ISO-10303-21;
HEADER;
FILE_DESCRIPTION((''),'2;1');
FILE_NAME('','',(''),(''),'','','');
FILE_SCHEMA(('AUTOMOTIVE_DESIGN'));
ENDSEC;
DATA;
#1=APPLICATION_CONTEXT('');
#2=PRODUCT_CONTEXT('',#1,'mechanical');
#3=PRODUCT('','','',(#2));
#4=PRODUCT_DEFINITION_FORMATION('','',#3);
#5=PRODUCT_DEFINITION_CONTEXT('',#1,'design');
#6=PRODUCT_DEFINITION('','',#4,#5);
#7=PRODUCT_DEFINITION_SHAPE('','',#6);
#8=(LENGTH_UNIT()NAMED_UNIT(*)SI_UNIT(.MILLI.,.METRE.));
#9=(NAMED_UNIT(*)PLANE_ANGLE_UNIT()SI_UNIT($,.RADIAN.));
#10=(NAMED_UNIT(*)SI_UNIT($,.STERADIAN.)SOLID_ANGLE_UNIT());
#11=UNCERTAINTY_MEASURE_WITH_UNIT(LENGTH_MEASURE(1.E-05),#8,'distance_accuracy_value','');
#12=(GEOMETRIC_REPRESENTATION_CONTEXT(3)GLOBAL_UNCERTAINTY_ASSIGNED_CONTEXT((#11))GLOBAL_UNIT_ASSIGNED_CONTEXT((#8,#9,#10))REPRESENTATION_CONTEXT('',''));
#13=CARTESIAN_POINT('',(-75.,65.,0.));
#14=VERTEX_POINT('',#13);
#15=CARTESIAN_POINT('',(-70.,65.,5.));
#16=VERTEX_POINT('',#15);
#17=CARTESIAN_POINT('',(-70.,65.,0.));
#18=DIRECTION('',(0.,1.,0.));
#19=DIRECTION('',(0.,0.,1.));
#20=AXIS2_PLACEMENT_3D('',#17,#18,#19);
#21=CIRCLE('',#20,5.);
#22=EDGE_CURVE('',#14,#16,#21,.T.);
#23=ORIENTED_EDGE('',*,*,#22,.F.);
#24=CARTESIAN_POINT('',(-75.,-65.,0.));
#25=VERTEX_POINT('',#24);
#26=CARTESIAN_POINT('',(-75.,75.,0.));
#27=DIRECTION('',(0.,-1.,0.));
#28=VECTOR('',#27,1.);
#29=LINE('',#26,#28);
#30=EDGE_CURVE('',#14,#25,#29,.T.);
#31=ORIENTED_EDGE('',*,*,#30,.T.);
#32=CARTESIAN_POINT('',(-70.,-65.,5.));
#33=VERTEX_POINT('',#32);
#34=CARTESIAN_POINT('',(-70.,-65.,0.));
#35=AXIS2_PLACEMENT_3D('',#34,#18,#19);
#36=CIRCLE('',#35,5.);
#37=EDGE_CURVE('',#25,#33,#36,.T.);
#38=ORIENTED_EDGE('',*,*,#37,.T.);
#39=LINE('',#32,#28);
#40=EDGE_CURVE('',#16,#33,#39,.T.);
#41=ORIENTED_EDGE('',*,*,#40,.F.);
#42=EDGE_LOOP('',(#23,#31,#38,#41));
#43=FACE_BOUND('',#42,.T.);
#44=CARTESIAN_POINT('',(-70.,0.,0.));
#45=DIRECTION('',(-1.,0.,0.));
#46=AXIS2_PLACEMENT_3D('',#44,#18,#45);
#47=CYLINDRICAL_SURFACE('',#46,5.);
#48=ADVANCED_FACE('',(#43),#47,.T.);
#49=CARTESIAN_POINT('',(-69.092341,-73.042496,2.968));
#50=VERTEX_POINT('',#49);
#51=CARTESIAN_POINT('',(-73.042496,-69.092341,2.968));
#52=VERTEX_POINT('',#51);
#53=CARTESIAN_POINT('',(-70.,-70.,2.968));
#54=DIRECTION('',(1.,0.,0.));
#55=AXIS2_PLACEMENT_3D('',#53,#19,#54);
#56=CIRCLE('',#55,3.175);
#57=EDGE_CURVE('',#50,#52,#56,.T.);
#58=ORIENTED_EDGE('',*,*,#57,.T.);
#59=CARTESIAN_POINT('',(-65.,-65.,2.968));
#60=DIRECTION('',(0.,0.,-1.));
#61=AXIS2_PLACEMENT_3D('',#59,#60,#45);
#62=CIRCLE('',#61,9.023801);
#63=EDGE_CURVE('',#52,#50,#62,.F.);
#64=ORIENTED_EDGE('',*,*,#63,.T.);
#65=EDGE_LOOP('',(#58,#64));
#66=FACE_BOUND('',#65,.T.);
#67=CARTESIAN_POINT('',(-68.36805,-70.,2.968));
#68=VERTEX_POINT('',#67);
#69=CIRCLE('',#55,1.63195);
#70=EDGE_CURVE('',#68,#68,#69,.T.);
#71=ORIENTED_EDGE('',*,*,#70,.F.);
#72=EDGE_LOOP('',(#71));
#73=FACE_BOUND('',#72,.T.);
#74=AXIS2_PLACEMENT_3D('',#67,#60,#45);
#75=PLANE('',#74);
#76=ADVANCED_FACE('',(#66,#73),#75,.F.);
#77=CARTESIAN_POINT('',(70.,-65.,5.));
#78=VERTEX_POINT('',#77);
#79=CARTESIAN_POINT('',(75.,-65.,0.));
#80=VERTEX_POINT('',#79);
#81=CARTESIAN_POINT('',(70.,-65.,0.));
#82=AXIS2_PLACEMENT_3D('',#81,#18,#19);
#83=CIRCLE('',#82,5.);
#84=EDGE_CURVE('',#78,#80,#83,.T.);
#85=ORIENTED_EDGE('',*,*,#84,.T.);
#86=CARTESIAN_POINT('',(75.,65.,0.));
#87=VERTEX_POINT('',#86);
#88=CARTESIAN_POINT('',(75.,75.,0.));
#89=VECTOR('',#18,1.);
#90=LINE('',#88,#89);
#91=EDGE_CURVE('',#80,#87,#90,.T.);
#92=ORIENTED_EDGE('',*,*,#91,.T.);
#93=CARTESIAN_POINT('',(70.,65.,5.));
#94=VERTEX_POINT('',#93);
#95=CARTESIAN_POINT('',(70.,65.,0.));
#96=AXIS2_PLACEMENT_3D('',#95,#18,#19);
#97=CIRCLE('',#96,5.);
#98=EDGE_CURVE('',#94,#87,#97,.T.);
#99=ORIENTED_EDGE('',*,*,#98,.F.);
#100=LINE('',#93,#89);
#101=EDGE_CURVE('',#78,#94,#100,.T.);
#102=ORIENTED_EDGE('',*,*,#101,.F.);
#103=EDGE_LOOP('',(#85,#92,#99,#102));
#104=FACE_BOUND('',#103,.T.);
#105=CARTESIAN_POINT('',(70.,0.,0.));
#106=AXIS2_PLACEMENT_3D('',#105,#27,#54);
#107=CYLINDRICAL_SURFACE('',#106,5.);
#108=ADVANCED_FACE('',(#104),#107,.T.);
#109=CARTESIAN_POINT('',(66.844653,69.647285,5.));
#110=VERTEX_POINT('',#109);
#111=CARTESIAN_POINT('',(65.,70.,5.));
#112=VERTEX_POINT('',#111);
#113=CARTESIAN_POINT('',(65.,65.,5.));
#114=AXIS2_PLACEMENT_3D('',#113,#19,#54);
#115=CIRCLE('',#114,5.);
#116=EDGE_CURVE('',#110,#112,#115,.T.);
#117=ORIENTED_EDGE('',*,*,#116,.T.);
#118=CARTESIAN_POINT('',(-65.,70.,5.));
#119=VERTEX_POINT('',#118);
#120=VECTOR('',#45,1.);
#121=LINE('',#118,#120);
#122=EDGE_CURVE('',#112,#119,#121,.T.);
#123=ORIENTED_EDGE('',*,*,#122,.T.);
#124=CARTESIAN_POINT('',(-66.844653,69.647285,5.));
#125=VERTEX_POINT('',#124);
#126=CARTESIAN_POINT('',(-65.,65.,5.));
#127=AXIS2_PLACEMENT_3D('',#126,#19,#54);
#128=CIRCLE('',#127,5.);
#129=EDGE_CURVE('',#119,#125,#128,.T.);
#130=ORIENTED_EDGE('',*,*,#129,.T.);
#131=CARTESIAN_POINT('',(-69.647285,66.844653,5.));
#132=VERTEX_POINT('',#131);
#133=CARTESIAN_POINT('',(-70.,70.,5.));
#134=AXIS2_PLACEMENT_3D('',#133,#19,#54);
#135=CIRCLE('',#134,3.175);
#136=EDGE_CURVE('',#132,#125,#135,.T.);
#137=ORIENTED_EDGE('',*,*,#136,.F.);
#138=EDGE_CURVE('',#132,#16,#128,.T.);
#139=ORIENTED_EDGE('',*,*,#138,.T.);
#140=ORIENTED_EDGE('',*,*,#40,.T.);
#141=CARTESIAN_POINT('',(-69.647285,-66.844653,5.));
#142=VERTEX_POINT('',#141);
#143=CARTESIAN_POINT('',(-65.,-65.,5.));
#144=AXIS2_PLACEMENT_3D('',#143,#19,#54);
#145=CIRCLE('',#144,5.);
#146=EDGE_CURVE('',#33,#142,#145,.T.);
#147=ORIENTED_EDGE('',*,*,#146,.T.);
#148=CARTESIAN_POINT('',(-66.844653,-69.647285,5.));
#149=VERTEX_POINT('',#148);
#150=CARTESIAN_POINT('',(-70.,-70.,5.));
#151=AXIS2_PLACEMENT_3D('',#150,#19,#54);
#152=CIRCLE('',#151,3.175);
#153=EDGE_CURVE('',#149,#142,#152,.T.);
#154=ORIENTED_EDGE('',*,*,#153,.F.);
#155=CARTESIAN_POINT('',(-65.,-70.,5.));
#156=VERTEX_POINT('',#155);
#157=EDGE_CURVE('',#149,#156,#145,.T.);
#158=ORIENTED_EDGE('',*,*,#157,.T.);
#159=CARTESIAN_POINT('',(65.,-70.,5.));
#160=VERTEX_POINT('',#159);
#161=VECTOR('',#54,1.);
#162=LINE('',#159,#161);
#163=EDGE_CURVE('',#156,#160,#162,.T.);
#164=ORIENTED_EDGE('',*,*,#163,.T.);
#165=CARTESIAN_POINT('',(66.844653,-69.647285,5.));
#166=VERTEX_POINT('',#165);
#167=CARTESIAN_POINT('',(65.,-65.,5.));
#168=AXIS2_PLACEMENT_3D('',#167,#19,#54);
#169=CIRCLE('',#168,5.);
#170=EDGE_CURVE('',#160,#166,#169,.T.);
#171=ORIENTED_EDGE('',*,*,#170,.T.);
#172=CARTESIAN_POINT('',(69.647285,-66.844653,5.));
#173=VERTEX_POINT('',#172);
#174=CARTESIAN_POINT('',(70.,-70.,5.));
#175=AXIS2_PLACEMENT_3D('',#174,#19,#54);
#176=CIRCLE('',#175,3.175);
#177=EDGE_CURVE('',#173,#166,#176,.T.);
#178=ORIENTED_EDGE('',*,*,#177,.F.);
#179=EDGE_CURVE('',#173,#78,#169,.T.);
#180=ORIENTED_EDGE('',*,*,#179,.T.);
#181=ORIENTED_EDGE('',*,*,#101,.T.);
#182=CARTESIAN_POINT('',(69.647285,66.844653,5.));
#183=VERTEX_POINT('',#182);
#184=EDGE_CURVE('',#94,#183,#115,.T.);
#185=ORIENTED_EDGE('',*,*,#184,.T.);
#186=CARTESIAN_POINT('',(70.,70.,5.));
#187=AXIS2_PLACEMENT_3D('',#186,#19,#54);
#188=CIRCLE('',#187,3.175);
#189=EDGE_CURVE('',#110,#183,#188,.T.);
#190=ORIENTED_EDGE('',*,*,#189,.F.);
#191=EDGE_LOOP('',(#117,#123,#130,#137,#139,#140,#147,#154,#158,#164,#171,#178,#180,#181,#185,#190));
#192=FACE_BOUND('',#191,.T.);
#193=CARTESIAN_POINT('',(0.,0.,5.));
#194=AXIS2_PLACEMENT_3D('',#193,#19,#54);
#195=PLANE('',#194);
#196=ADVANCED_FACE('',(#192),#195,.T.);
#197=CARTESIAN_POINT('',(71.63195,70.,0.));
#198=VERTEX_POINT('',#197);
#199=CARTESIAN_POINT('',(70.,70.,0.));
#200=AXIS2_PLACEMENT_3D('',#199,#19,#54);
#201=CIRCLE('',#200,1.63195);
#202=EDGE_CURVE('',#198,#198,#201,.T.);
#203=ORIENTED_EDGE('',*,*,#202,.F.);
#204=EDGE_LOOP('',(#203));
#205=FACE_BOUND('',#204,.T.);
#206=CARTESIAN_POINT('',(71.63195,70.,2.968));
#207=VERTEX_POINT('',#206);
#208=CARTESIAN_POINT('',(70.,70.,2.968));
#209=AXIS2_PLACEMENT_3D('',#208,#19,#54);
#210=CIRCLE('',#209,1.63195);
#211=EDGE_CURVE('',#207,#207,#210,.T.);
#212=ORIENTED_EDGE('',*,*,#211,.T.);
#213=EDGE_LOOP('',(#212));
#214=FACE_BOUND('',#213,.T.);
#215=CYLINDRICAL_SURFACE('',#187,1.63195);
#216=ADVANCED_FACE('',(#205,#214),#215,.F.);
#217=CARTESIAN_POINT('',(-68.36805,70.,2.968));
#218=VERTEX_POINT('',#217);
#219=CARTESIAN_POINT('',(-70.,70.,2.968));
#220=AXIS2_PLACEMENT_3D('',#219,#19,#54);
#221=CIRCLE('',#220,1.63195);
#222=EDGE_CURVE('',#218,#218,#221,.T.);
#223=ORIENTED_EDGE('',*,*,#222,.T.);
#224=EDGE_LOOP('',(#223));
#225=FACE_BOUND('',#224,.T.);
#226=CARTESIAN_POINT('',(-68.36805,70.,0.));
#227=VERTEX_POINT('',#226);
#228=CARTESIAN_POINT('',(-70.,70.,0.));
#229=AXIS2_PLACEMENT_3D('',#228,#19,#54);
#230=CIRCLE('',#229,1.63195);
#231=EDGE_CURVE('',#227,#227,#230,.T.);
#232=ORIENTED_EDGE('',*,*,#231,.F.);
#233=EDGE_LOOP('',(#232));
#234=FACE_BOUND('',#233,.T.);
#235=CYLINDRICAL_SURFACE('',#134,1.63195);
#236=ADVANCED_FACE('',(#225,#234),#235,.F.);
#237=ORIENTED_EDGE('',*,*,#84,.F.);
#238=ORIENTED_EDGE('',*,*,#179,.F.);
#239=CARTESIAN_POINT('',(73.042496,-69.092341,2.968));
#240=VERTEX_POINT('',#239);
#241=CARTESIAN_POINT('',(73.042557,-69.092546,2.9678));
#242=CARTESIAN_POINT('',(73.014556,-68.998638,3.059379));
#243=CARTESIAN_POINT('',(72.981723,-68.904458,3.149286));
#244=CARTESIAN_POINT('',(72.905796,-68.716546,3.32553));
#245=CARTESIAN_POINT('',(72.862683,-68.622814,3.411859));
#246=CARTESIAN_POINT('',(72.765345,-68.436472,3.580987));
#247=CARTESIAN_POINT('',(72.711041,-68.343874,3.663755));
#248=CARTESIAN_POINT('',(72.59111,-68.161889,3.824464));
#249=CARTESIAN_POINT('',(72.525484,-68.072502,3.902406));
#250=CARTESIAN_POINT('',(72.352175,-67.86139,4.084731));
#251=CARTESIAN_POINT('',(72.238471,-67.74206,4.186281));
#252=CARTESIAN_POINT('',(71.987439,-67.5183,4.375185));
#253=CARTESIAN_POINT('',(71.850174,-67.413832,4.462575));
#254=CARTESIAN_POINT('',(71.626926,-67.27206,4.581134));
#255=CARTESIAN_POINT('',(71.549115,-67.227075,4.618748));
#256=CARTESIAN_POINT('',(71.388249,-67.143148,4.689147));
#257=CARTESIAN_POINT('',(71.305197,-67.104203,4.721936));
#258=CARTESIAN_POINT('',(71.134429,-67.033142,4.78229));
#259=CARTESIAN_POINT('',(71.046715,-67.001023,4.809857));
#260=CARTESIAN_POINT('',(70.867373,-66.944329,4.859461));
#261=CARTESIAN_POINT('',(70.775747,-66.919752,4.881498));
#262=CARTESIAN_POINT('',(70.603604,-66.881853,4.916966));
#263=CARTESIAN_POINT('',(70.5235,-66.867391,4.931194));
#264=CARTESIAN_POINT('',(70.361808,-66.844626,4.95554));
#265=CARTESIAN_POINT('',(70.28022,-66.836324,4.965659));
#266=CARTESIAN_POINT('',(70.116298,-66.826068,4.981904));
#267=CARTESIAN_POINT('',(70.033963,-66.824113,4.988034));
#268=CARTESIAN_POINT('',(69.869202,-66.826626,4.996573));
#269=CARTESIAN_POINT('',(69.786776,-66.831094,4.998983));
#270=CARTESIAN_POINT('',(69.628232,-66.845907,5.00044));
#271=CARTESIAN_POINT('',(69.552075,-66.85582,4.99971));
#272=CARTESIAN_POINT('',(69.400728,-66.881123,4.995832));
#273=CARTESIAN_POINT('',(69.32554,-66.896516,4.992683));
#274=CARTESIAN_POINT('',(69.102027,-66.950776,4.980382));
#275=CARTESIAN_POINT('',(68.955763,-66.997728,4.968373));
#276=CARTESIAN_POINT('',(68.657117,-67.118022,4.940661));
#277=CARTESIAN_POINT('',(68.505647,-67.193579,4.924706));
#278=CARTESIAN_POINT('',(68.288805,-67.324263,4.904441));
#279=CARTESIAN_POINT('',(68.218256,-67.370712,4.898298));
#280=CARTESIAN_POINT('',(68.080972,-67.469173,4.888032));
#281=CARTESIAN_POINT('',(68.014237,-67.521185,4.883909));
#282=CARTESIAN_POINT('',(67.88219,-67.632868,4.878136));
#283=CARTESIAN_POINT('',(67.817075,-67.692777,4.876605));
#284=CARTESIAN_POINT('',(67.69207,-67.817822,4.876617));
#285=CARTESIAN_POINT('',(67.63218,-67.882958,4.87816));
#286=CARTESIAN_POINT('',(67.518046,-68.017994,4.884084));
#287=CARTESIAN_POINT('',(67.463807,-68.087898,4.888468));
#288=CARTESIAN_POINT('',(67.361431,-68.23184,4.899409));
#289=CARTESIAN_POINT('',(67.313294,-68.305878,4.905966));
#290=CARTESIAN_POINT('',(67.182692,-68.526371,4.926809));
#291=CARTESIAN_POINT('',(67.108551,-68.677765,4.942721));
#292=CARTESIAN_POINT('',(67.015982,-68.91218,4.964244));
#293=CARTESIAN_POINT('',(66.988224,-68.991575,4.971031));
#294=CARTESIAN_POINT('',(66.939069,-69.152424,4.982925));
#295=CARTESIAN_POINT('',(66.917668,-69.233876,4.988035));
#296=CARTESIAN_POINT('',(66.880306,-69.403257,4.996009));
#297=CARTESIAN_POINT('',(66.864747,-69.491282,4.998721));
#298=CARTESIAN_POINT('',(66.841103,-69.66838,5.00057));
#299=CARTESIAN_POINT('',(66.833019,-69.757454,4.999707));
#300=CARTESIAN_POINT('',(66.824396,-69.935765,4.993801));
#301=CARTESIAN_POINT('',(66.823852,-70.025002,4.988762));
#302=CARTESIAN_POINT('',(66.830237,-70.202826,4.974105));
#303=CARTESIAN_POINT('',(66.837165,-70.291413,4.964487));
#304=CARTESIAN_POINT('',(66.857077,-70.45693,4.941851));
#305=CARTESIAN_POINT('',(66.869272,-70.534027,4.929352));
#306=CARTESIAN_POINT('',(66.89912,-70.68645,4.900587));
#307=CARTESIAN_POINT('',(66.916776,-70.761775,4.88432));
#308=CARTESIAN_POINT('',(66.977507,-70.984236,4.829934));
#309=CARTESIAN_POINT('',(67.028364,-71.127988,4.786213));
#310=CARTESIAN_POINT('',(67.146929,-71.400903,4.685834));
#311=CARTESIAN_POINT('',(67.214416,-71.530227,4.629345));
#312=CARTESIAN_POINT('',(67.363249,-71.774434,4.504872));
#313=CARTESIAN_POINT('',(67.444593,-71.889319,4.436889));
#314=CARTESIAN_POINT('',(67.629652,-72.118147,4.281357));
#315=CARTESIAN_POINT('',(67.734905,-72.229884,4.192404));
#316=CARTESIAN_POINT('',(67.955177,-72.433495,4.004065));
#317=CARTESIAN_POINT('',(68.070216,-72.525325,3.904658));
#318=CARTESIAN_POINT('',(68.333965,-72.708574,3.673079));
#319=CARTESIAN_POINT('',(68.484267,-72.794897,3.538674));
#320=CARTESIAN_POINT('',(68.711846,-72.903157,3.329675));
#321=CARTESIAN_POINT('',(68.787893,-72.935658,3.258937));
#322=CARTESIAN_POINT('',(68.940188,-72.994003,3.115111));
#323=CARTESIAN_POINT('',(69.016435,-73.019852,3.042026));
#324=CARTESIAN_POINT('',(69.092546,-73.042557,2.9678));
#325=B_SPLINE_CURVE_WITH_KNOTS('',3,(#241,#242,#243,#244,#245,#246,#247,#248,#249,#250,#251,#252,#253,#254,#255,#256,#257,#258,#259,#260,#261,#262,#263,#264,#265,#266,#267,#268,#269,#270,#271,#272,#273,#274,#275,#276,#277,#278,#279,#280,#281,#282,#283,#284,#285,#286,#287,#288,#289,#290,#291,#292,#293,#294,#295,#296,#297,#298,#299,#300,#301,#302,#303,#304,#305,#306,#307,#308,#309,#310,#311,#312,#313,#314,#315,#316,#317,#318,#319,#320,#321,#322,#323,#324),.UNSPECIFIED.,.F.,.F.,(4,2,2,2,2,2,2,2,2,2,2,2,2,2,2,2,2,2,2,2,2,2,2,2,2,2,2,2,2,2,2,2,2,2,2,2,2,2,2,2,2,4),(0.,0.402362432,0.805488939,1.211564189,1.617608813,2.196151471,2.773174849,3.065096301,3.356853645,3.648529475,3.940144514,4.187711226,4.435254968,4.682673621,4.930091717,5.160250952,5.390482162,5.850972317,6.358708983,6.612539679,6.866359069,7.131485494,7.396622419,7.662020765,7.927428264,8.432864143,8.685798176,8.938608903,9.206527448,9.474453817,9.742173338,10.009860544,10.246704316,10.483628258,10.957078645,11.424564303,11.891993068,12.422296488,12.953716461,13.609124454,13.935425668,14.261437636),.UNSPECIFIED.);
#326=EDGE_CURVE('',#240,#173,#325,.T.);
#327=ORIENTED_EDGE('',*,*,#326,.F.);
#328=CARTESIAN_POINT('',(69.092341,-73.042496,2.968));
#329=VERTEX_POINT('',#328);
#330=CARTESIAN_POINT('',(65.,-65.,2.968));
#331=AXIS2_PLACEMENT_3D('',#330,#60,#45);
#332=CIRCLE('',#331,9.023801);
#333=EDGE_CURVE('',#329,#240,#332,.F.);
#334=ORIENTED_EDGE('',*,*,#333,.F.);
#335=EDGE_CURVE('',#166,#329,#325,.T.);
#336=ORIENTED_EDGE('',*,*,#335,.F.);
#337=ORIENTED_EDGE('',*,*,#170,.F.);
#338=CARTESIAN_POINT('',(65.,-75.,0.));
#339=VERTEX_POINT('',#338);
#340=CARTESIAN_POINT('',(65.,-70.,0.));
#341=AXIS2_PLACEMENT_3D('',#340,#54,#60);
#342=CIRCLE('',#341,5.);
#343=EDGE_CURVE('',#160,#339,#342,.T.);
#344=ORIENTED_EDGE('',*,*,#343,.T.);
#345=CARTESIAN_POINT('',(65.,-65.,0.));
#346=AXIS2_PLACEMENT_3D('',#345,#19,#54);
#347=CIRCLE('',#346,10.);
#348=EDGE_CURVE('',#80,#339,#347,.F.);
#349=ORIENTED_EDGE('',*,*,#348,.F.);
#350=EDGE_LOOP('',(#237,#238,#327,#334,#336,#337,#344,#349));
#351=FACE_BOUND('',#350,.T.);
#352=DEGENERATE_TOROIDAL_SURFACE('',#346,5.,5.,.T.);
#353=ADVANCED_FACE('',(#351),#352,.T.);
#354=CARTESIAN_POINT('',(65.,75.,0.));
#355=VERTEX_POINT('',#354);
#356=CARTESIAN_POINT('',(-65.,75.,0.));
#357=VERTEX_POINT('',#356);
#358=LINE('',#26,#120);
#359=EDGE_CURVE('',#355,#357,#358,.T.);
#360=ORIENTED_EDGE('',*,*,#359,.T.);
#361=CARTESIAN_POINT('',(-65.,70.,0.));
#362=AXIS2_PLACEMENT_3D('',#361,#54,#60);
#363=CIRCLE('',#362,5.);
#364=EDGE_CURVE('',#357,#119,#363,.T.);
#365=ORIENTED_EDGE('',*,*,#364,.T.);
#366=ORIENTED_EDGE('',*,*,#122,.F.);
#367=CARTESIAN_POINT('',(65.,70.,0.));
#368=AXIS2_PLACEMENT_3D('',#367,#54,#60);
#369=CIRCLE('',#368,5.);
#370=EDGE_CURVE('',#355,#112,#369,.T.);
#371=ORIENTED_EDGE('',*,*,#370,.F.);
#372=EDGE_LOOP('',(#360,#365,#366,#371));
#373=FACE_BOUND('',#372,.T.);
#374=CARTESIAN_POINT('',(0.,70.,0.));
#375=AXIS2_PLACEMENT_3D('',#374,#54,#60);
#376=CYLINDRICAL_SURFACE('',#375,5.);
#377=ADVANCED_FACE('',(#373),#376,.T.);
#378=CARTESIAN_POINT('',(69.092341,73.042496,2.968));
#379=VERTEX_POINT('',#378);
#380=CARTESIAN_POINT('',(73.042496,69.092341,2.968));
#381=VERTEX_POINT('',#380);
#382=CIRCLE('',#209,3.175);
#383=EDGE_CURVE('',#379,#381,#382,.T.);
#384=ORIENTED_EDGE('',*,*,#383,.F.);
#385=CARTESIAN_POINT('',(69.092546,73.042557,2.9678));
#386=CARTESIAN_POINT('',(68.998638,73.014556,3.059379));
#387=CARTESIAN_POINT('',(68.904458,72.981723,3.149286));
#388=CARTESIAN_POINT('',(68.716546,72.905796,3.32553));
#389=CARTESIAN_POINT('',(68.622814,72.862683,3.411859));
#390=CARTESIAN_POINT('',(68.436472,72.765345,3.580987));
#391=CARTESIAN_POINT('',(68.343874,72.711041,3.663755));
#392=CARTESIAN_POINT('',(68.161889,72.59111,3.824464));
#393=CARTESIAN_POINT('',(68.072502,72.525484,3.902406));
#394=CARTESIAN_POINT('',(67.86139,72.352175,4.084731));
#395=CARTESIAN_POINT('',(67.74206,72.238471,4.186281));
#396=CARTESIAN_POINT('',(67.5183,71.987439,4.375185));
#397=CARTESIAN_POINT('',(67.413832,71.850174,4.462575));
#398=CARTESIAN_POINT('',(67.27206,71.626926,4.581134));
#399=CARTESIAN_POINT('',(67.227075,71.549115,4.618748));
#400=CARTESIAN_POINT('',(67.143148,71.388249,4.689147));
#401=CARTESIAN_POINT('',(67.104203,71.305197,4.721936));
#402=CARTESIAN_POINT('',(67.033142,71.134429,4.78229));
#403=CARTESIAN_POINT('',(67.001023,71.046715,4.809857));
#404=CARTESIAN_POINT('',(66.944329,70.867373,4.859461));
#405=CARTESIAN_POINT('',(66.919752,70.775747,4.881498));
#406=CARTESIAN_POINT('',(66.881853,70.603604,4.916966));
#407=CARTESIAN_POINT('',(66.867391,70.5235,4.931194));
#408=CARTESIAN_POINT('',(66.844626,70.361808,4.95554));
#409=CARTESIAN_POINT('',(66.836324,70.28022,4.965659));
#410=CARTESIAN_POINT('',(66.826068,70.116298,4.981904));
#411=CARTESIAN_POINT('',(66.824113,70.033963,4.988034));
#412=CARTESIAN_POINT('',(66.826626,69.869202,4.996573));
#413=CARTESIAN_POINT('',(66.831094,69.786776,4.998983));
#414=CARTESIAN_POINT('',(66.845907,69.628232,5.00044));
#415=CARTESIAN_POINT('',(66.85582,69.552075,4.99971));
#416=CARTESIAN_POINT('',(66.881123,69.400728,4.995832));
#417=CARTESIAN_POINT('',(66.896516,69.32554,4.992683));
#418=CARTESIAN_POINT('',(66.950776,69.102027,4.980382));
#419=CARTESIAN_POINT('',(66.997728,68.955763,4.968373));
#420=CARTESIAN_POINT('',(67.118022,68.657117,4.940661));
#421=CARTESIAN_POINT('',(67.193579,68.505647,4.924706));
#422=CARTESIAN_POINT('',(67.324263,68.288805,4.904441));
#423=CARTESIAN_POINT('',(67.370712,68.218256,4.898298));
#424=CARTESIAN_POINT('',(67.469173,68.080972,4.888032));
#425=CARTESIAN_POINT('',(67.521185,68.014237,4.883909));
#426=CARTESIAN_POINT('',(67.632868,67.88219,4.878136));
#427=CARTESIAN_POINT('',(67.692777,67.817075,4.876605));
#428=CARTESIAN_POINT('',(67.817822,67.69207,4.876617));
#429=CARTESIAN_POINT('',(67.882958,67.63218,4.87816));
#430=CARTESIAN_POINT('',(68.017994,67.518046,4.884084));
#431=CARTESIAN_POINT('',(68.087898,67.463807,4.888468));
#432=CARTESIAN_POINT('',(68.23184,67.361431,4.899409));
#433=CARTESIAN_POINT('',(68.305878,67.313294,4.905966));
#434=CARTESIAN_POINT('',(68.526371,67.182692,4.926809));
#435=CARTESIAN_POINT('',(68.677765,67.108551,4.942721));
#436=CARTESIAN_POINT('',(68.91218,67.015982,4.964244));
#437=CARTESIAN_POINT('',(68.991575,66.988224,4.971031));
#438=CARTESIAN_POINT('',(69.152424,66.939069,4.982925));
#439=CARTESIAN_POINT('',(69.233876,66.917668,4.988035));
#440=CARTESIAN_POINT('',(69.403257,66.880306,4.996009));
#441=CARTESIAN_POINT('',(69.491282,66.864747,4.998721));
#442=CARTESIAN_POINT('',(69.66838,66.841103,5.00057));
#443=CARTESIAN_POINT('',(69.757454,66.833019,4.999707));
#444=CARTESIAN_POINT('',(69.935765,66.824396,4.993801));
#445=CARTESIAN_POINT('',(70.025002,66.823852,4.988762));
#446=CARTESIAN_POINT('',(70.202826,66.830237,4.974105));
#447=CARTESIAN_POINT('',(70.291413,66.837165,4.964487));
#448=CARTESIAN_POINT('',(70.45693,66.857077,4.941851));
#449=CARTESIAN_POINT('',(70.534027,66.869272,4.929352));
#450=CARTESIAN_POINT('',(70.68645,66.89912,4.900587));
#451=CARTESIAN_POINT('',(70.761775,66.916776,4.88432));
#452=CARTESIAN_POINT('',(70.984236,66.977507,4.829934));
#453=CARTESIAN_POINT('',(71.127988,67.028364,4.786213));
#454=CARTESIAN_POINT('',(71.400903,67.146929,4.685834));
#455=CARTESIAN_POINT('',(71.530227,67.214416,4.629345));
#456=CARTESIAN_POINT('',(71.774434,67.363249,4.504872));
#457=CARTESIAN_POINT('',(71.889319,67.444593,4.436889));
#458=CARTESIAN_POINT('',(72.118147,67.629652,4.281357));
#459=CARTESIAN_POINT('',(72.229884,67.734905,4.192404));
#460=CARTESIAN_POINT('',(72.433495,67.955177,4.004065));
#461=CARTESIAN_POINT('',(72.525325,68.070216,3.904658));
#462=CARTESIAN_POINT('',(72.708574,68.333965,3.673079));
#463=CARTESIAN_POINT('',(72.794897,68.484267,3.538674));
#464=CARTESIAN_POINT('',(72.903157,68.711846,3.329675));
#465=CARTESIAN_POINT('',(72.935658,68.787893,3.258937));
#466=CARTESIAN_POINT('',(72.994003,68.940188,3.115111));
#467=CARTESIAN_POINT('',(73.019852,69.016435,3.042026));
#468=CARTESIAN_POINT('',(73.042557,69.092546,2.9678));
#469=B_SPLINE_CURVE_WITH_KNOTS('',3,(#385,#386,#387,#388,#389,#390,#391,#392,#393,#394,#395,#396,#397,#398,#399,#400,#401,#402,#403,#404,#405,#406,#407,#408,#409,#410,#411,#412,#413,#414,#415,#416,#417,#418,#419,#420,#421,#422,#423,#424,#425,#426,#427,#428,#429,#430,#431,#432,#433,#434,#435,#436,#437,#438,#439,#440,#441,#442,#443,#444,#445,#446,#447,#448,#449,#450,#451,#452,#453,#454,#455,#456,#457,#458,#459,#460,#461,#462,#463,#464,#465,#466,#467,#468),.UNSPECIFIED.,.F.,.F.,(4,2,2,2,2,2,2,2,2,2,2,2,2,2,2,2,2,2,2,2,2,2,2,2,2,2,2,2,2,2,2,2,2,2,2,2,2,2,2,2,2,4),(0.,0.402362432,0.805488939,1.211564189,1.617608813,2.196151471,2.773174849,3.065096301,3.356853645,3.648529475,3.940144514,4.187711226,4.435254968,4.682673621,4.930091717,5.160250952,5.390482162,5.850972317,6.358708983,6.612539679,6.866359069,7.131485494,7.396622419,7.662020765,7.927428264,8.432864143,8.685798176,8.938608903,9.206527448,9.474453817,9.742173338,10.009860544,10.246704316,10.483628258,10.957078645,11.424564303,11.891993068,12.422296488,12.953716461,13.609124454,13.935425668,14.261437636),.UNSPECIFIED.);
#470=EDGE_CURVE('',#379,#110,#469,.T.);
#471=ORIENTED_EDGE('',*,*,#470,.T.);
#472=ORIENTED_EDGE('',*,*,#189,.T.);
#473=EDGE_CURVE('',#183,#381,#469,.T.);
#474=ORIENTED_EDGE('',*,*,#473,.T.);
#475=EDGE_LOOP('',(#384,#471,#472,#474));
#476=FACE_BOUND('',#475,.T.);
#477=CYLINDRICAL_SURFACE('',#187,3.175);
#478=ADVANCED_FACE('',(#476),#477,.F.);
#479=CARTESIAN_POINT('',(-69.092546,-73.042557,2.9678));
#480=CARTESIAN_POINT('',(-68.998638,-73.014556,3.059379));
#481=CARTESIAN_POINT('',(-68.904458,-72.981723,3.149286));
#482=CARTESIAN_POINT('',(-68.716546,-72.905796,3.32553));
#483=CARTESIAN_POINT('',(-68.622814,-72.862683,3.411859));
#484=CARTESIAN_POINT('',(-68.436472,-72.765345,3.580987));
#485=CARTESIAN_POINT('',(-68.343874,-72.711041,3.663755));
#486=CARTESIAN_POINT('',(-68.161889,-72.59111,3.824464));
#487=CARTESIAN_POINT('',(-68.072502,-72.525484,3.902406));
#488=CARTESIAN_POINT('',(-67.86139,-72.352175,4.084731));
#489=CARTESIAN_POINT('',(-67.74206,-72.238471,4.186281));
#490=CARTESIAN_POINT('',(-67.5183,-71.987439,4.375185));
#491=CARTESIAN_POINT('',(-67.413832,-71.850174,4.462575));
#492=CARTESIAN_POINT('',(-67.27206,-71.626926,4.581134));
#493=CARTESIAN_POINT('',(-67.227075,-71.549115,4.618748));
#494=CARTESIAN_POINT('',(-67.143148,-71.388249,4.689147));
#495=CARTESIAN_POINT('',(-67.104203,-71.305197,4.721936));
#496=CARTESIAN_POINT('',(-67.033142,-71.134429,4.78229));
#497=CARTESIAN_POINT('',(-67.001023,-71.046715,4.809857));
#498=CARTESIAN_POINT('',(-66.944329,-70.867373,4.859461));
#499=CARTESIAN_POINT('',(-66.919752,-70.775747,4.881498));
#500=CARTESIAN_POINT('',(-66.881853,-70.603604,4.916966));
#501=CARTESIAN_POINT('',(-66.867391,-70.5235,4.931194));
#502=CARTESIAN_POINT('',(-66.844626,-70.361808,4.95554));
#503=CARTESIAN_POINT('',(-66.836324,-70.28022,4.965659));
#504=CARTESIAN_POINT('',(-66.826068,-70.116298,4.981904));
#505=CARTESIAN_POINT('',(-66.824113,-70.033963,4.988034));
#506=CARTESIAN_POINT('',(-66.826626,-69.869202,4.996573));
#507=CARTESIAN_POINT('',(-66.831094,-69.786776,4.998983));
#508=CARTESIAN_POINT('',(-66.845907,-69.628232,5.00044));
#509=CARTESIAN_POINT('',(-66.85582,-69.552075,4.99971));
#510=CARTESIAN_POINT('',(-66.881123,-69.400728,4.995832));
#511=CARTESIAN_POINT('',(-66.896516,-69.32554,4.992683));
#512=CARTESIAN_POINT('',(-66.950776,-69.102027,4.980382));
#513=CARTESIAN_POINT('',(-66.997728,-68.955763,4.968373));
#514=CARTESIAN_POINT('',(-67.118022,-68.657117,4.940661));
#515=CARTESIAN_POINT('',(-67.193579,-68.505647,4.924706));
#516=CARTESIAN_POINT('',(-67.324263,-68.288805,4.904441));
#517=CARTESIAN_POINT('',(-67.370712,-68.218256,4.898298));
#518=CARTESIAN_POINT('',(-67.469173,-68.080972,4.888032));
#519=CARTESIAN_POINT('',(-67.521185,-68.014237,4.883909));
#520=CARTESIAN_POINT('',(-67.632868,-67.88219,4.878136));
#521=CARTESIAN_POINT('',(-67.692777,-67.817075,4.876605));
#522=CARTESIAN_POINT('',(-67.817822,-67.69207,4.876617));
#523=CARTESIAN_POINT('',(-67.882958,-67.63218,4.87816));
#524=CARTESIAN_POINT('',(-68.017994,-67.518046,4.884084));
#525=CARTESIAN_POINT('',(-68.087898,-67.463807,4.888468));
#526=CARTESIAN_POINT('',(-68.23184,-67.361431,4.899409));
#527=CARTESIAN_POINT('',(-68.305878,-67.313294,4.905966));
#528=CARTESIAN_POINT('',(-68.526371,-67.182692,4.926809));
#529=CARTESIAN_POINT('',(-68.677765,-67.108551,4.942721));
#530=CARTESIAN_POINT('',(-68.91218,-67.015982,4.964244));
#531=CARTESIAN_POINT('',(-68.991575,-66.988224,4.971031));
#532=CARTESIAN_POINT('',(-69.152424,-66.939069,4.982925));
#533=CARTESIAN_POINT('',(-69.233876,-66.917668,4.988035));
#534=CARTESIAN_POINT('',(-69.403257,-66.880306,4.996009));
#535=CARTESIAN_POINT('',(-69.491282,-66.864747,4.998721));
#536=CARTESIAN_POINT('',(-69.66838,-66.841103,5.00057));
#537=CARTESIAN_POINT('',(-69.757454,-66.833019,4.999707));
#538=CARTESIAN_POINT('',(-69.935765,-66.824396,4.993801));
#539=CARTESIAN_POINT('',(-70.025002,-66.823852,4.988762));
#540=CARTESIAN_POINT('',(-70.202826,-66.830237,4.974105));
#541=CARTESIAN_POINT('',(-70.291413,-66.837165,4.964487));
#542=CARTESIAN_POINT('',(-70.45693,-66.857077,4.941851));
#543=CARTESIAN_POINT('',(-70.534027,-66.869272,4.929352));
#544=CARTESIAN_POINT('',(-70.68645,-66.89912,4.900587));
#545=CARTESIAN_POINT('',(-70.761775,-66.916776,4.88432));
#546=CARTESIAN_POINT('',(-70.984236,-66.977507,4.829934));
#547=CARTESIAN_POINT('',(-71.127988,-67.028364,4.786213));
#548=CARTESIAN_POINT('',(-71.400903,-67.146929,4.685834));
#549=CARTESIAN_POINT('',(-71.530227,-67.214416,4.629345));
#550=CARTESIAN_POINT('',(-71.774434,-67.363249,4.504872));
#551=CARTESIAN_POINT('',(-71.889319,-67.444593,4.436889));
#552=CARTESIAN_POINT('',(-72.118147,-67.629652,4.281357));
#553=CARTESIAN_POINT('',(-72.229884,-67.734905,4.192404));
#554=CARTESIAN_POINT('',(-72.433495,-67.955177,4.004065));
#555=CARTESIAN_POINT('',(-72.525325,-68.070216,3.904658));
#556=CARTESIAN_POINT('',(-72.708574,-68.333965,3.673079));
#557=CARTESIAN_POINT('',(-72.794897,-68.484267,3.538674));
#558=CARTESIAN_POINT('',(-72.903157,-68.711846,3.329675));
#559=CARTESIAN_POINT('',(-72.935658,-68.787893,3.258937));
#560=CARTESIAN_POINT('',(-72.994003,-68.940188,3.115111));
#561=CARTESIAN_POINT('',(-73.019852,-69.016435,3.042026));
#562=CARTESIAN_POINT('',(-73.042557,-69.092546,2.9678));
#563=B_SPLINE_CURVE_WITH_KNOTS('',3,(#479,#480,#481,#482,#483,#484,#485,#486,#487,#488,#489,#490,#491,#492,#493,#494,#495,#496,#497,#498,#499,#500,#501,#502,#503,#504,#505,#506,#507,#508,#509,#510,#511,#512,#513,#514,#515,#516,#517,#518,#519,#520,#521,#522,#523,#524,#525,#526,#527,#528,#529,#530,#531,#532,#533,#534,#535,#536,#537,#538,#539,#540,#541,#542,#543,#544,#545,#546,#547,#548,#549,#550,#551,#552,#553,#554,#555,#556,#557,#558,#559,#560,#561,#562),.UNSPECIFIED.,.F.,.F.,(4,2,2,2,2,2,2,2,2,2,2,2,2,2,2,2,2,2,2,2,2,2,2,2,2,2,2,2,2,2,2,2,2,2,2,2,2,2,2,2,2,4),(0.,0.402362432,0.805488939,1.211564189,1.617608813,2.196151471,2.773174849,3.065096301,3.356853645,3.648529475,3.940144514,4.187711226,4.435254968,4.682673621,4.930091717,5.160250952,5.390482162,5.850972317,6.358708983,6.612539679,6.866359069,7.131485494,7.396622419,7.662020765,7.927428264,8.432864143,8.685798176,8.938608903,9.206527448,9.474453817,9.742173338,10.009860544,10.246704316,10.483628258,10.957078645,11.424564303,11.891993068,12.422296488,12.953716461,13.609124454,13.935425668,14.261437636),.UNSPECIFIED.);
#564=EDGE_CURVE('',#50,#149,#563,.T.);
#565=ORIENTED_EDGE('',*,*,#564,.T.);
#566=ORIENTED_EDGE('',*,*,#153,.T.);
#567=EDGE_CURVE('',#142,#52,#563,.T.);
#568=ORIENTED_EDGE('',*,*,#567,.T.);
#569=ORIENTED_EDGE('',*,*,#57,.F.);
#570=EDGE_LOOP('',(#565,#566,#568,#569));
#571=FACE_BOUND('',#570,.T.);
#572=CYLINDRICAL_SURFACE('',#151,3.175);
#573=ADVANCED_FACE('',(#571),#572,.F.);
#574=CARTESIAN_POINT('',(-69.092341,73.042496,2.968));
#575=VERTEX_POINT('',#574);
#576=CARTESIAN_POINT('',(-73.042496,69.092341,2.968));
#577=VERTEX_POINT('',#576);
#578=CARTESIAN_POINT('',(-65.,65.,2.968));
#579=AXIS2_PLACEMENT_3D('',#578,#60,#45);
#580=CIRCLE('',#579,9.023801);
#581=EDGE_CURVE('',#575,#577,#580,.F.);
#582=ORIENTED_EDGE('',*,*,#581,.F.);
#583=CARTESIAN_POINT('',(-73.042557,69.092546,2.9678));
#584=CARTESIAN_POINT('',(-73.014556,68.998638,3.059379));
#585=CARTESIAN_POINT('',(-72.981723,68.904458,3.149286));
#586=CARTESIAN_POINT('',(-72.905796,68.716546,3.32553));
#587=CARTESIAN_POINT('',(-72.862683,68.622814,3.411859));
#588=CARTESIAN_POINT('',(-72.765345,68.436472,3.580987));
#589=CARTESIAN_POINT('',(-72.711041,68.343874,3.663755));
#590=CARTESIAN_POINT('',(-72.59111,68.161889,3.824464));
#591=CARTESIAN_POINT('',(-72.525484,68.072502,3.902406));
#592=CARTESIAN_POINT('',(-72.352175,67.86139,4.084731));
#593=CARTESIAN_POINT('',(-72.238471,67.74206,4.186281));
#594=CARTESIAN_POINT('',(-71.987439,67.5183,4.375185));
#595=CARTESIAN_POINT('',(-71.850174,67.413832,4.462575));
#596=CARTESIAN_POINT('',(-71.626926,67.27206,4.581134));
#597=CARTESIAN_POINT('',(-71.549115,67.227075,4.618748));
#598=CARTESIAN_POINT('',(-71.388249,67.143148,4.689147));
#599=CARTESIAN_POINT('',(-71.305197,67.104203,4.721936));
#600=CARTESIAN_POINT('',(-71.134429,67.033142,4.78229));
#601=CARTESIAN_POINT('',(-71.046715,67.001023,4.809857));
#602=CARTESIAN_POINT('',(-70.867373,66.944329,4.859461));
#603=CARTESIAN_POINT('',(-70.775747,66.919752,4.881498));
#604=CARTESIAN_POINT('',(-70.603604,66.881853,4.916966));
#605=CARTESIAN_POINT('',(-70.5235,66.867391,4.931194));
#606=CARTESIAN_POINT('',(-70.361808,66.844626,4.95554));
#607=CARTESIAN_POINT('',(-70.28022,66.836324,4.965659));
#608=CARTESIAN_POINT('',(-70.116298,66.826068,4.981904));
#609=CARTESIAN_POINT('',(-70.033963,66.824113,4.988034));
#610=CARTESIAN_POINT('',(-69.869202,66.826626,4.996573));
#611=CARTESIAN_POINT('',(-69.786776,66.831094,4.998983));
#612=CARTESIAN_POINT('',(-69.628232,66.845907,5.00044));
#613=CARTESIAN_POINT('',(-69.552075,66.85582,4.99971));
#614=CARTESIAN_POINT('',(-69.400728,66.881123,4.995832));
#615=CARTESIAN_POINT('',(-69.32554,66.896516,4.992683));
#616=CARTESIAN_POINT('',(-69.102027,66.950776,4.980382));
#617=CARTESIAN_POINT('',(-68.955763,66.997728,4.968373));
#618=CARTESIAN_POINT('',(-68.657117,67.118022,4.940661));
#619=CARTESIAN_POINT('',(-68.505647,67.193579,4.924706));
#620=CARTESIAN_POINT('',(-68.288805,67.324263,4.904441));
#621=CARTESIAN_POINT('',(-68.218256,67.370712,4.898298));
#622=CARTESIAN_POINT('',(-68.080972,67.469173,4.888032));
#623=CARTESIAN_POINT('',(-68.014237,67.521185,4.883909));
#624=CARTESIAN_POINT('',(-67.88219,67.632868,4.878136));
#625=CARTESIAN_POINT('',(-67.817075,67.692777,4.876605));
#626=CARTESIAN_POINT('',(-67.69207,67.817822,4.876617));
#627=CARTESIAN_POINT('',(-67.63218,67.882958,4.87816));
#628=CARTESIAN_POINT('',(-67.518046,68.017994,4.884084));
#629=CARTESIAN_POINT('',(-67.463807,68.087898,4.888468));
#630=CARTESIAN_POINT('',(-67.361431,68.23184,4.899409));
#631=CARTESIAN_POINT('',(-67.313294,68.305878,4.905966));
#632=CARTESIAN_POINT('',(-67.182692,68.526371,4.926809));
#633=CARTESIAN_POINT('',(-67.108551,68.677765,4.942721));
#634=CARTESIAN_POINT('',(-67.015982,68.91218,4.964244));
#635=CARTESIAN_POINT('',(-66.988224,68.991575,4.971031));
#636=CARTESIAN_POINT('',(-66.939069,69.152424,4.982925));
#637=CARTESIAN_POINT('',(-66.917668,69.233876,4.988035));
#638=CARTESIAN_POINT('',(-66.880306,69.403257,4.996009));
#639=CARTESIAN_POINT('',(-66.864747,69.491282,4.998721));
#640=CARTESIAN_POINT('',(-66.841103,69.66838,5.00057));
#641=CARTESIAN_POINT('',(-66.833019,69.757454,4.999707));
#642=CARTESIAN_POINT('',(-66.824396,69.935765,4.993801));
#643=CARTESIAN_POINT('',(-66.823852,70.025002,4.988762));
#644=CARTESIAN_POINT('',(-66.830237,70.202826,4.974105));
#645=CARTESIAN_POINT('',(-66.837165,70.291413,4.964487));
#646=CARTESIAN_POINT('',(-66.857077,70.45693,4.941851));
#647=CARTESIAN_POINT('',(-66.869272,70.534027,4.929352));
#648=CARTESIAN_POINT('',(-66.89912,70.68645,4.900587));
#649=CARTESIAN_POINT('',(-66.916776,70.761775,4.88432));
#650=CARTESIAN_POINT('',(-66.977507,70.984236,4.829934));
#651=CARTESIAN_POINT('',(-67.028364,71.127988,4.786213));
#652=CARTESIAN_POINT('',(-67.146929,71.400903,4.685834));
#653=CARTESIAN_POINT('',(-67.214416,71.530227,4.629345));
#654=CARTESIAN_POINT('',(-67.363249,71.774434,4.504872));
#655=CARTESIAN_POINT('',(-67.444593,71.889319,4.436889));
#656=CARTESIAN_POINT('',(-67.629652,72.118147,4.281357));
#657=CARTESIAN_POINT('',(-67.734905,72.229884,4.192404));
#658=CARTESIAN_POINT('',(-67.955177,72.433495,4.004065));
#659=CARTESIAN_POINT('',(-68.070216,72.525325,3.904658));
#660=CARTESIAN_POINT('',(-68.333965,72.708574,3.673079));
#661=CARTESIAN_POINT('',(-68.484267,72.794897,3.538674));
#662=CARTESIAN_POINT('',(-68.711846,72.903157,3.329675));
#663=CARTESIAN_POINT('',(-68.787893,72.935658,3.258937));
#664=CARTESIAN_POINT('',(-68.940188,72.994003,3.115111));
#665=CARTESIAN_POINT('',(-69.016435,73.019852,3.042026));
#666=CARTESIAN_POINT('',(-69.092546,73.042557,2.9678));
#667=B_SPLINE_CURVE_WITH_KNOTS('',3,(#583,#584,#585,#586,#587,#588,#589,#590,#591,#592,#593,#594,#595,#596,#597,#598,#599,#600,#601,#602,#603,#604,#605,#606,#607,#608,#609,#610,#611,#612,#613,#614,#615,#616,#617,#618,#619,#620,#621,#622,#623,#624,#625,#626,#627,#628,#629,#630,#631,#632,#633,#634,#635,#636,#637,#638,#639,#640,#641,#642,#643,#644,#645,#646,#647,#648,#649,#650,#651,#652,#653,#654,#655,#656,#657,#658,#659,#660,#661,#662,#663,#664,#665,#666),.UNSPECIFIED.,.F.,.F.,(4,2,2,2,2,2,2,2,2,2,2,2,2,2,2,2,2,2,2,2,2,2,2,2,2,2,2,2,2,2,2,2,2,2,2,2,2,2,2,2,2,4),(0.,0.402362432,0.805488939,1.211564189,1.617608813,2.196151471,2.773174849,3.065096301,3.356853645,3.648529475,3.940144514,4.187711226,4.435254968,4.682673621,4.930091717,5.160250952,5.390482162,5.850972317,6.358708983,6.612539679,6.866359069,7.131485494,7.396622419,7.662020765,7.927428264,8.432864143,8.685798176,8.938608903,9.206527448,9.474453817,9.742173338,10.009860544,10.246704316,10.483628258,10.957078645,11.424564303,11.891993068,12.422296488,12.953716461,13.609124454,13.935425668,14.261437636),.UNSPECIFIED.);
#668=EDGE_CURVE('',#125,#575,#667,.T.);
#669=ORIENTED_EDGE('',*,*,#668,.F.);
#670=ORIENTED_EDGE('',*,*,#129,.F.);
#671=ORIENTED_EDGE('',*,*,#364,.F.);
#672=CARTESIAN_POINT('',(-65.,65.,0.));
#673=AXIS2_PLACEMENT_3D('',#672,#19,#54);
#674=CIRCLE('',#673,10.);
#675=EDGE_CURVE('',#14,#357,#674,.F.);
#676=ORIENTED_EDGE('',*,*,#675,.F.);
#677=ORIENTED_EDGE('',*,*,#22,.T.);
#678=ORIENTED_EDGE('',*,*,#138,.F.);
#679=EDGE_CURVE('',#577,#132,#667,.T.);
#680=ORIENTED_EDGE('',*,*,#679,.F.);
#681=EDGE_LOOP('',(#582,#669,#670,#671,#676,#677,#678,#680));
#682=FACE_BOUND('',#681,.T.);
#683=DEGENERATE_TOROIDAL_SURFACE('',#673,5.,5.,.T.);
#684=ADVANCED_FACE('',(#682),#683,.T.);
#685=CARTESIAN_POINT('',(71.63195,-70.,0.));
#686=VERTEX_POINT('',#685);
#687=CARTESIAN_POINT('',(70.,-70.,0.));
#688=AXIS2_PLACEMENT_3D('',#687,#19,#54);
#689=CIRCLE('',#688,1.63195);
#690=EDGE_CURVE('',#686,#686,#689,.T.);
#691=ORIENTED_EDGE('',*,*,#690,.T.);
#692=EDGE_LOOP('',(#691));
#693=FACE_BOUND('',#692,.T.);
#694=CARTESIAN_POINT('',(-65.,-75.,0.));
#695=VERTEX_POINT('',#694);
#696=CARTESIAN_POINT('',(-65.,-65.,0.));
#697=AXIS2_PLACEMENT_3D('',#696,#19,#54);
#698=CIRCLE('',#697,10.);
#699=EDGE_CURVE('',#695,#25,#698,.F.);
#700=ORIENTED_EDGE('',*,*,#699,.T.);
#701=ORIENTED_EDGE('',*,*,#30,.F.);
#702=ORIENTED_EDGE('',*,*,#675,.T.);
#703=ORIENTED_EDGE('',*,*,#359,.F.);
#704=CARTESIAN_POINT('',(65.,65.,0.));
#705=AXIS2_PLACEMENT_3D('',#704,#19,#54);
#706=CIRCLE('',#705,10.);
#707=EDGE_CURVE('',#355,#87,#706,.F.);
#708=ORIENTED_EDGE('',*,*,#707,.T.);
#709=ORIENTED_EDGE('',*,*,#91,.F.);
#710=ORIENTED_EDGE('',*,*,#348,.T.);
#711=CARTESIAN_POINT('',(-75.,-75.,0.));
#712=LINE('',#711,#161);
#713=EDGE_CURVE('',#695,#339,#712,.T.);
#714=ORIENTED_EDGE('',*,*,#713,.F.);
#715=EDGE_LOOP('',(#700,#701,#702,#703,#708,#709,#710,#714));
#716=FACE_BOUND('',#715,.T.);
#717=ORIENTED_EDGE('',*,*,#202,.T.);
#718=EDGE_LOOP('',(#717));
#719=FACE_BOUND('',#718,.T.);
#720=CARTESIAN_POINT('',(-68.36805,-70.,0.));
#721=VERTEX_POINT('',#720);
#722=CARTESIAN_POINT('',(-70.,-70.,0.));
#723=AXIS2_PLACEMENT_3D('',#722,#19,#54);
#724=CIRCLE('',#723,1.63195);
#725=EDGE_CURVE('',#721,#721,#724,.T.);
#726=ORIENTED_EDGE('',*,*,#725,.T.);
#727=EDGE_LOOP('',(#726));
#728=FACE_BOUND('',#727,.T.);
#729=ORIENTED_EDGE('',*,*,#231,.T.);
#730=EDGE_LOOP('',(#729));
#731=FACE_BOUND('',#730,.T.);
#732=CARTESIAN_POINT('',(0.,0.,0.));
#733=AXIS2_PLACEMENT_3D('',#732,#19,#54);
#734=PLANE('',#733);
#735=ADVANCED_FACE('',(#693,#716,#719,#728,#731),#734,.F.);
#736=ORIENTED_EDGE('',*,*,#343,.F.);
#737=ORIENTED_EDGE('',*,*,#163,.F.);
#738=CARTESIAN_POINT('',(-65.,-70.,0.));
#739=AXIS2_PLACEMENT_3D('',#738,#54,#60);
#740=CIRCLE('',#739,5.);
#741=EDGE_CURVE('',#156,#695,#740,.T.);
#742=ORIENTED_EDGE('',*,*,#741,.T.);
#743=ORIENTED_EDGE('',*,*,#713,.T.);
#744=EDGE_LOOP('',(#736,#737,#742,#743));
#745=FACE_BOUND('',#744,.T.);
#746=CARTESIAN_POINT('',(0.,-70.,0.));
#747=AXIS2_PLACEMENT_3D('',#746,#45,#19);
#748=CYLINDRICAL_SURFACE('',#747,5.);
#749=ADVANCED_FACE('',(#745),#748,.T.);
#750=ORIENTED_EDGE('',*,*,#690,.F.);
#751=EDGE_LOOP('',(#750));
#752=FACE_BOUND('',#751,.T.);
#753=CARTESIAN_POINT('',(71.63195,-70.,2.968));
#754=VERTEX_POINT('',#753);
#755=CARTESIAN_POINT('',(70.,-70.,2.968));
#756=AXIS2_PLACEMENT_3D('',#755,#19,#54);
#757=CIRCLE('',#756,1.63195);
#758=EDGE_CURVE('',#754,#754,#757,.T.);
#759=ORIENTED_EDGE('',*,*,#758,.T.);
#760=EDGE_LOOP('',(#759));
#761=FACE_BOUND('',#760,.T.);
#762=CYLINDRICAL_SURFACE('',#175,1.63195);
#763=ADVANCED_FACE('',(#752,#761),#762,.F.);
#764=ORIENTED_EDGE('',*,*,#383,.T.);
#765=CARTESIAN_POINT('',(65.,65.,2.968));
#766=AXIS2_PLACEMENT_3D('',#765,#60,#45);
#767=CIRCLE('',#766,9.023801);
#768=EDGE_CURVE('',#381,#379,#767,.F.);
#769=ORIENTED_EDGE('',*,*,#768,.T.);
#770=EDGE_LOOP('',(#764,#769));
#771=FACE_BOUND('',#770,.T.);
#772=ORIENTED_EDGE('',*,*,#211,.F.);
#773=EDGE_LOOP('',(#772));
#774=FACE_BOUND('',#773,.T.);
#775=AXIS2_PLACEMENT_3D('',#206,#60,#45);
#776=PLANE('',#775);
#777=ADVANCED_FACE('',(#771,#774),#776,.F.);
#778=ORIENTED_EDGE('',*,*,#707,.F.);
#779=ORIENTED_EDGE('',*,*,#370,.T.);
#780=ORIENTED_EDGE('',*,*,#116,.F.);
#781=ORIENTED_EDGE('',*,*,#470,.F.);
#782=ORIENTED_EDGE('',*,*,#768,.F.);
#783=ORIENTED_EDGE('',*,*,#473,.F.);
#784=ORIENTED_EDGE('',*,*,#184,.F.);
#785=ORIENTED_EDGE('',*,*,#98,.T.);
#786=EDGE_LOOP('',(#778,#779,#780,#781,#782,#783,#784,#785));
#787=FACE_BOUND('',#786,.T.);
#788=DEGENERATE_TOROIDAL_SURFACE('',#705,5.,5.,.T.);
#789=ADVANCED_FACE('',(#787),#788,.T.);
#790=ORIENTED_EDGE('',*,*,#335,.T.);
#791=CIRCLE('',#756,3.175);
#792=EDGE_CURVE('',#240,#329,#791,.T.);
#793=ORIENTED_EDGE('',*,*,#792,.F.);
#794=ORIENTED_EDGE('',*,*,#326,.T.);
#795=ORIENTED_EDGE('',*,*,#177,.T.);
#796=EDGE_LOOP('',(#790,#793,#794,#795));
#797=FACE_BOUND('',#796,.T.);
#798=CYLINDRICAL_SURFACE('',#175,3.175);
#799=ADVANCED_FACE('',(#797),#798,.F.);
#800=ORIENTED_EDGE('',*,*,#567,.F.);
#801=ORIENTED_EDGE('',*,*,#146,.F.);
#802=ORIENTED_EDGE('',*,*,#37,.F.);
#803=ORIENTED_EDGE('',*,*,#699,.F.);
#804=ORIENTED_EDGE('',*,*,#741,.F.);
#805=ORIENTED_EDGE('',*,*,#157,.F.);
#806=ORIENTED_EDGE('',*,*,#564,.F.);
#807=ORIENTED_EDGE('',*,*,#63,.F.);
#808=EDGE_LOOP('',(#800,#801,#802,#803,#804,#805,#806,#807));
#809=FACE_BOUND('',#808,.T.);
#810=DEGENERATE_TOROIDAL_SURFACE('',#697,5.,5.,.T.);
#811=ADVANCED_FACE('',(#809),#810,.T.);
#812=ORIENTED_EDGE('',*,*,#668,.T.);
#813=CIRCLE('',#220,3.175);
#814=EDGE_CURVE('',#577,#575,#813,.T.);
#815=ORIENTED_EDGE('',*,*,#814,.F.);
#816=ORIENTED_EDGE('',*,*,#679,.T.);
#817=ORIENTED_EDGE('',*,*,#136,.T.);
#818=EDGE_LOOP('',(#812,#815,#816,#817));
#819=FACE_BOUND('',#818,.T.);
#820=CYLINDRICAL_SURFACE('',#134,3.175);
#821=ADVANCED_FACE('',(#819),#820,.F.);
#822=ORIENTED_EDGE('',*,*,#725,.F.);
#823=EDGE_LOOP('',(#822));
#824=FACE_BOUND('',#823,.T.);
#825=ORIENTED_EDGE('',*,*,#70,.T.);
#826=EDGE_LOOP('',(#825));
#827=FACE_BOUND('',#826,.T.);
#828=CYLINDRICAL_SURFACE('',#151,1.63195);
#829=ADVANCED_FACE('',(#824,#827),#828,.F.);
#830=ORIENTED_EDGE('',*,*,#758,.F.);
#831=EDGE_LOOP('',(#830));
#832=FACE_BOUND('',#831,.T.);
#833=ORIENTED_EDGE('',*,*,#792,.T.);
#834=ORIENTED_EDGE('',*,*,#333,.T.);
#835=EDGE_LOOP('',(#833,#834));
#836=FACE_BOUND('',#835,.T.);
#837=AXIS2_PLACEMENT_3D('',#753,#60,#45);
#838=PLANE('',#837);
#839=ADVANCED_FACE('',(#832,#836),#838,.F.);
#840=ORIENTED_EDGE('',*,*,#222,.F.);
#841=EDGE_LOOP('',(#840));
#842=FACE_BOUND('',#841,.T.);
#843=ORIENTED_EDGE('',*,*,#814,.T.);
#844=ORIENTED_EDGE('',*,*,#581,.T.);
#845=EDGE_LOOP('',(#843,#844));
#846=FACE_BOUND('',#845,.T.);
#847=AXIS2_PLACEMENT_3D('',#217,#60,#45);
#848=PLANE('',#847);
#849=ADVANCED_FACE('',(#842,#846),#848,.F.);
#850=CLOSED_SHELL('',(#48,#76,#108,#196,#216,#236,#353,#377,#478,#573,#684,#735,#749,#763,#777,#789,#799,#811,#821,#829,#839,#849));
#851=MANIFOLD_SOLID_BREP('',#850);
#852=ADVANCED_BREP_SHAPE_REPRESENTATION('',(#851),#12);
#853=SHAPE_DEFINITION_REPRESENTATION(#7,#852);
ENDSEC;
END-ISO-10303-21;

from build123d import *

# Parameters (mm, degrees)
CROQUIS1_W                                           = 150
CROQUIS1_H                                           = 150
SALIENTE_EXTRUIR1_DEPTH                              = 5
REDONDEO1_R                                          = 10
REDONDEO3_R                                          = 5
REFRENTADO_PARA_TORNILLO_CON_CABEZA_TRON_D           = 3.2639
REFRENTADO_PARA_TORNILLO_CON_CABEZA_TRON_DEPTH       = 50
REFRENTADO_PARA_TORNILLO_CON_CABEZA_TRON_CBORE_D     = 6.35
REFRENTADO_PARA_TORNILLO_CON_CABEZA_TRON_CBORE_DEPTH = 2.032
REFRENTADO_PARA_TORNILLO_CON_CABEZA_TRON_TIP         = 0.980574487


with BuildPart() as part:
    # Croquis1 → Saliente-Extruir1 (new body)
    with BuildSketch(Plane.XY):
        Rectangle(CROQUIS1_W, CROQUIS1_H)
    extrude(amount=SALIENTE_EXTRUIR1_DEPTH)

    # Redondeo1
    redondeo1_edges = [part.edges().sort_by_distance(p)[0] for p in [
        (75, -75, 2.5),
        (-75, -75, 2.5),
        (-75, 75, 2.5),
        (75, 75, 2.5),
    ]]
    fillet(redondeo1_edges, radius=REDONDEO1_R)

    # Redondeo3
    redondeo3_edges = [part.edges().sort_by_distance(p)[0] for p in [
        (72.071067812, 72.071067812, 5),
        (75, 0, 5),
        (72.071067812, -72.071067812, 5),
        (0, -75, 5),
        (-72.071067812, -72.071067812, 5),
        (-75, 0, 5),
        (-72.071067812, 72.071067812, 5),
        (0, 75, 5),
    ]]
    fillet(redondeo3_edges, radius=REDONDEO3_R - 0.0001)  # a hair under: the kernel refuses the full size

    # Refrentado para tornillo con cabeza troncocónica de #41
    with Locations(Plane.XY.offset(5)):
        with Locations((-70, 70), (-70, -70), (70, -70), (70, 70)):
            CounterBoreHole(REFRENTADO_PARA_TORNILLO_CON_CABEZA_TRON_D / 2, REFRENTADO_PARA_TORNILLO_CON_CABEZA_TRON_CBORE_D / 2, REFRENTADO_PARA_TORNILLO_CON_CABEZA_TRON_CBORE_DEPTH, depth=REFRENTADO_PARA_TORNILLO_CON_CABEZA_TRON_DEPTH)
            with Locations((0, 0, -(REFRENTADO_PARA_TORNILLO_CON_CABEZA_TRON_DEPTH + REFRENTADO_PARA_TORNILLO_CON_CABEZA_TRON_TIP / 2))):  # 118° drill point
                Cone(0, REFRENTADO_PARA_TORNILLO_CON_CABEZA_TRON_D / 2, REFRENTADO_PARA_TORNILLO_CON_CABEZA_TRON_TIP, mode=Mode.SUBTRACT)


solid = part.part
